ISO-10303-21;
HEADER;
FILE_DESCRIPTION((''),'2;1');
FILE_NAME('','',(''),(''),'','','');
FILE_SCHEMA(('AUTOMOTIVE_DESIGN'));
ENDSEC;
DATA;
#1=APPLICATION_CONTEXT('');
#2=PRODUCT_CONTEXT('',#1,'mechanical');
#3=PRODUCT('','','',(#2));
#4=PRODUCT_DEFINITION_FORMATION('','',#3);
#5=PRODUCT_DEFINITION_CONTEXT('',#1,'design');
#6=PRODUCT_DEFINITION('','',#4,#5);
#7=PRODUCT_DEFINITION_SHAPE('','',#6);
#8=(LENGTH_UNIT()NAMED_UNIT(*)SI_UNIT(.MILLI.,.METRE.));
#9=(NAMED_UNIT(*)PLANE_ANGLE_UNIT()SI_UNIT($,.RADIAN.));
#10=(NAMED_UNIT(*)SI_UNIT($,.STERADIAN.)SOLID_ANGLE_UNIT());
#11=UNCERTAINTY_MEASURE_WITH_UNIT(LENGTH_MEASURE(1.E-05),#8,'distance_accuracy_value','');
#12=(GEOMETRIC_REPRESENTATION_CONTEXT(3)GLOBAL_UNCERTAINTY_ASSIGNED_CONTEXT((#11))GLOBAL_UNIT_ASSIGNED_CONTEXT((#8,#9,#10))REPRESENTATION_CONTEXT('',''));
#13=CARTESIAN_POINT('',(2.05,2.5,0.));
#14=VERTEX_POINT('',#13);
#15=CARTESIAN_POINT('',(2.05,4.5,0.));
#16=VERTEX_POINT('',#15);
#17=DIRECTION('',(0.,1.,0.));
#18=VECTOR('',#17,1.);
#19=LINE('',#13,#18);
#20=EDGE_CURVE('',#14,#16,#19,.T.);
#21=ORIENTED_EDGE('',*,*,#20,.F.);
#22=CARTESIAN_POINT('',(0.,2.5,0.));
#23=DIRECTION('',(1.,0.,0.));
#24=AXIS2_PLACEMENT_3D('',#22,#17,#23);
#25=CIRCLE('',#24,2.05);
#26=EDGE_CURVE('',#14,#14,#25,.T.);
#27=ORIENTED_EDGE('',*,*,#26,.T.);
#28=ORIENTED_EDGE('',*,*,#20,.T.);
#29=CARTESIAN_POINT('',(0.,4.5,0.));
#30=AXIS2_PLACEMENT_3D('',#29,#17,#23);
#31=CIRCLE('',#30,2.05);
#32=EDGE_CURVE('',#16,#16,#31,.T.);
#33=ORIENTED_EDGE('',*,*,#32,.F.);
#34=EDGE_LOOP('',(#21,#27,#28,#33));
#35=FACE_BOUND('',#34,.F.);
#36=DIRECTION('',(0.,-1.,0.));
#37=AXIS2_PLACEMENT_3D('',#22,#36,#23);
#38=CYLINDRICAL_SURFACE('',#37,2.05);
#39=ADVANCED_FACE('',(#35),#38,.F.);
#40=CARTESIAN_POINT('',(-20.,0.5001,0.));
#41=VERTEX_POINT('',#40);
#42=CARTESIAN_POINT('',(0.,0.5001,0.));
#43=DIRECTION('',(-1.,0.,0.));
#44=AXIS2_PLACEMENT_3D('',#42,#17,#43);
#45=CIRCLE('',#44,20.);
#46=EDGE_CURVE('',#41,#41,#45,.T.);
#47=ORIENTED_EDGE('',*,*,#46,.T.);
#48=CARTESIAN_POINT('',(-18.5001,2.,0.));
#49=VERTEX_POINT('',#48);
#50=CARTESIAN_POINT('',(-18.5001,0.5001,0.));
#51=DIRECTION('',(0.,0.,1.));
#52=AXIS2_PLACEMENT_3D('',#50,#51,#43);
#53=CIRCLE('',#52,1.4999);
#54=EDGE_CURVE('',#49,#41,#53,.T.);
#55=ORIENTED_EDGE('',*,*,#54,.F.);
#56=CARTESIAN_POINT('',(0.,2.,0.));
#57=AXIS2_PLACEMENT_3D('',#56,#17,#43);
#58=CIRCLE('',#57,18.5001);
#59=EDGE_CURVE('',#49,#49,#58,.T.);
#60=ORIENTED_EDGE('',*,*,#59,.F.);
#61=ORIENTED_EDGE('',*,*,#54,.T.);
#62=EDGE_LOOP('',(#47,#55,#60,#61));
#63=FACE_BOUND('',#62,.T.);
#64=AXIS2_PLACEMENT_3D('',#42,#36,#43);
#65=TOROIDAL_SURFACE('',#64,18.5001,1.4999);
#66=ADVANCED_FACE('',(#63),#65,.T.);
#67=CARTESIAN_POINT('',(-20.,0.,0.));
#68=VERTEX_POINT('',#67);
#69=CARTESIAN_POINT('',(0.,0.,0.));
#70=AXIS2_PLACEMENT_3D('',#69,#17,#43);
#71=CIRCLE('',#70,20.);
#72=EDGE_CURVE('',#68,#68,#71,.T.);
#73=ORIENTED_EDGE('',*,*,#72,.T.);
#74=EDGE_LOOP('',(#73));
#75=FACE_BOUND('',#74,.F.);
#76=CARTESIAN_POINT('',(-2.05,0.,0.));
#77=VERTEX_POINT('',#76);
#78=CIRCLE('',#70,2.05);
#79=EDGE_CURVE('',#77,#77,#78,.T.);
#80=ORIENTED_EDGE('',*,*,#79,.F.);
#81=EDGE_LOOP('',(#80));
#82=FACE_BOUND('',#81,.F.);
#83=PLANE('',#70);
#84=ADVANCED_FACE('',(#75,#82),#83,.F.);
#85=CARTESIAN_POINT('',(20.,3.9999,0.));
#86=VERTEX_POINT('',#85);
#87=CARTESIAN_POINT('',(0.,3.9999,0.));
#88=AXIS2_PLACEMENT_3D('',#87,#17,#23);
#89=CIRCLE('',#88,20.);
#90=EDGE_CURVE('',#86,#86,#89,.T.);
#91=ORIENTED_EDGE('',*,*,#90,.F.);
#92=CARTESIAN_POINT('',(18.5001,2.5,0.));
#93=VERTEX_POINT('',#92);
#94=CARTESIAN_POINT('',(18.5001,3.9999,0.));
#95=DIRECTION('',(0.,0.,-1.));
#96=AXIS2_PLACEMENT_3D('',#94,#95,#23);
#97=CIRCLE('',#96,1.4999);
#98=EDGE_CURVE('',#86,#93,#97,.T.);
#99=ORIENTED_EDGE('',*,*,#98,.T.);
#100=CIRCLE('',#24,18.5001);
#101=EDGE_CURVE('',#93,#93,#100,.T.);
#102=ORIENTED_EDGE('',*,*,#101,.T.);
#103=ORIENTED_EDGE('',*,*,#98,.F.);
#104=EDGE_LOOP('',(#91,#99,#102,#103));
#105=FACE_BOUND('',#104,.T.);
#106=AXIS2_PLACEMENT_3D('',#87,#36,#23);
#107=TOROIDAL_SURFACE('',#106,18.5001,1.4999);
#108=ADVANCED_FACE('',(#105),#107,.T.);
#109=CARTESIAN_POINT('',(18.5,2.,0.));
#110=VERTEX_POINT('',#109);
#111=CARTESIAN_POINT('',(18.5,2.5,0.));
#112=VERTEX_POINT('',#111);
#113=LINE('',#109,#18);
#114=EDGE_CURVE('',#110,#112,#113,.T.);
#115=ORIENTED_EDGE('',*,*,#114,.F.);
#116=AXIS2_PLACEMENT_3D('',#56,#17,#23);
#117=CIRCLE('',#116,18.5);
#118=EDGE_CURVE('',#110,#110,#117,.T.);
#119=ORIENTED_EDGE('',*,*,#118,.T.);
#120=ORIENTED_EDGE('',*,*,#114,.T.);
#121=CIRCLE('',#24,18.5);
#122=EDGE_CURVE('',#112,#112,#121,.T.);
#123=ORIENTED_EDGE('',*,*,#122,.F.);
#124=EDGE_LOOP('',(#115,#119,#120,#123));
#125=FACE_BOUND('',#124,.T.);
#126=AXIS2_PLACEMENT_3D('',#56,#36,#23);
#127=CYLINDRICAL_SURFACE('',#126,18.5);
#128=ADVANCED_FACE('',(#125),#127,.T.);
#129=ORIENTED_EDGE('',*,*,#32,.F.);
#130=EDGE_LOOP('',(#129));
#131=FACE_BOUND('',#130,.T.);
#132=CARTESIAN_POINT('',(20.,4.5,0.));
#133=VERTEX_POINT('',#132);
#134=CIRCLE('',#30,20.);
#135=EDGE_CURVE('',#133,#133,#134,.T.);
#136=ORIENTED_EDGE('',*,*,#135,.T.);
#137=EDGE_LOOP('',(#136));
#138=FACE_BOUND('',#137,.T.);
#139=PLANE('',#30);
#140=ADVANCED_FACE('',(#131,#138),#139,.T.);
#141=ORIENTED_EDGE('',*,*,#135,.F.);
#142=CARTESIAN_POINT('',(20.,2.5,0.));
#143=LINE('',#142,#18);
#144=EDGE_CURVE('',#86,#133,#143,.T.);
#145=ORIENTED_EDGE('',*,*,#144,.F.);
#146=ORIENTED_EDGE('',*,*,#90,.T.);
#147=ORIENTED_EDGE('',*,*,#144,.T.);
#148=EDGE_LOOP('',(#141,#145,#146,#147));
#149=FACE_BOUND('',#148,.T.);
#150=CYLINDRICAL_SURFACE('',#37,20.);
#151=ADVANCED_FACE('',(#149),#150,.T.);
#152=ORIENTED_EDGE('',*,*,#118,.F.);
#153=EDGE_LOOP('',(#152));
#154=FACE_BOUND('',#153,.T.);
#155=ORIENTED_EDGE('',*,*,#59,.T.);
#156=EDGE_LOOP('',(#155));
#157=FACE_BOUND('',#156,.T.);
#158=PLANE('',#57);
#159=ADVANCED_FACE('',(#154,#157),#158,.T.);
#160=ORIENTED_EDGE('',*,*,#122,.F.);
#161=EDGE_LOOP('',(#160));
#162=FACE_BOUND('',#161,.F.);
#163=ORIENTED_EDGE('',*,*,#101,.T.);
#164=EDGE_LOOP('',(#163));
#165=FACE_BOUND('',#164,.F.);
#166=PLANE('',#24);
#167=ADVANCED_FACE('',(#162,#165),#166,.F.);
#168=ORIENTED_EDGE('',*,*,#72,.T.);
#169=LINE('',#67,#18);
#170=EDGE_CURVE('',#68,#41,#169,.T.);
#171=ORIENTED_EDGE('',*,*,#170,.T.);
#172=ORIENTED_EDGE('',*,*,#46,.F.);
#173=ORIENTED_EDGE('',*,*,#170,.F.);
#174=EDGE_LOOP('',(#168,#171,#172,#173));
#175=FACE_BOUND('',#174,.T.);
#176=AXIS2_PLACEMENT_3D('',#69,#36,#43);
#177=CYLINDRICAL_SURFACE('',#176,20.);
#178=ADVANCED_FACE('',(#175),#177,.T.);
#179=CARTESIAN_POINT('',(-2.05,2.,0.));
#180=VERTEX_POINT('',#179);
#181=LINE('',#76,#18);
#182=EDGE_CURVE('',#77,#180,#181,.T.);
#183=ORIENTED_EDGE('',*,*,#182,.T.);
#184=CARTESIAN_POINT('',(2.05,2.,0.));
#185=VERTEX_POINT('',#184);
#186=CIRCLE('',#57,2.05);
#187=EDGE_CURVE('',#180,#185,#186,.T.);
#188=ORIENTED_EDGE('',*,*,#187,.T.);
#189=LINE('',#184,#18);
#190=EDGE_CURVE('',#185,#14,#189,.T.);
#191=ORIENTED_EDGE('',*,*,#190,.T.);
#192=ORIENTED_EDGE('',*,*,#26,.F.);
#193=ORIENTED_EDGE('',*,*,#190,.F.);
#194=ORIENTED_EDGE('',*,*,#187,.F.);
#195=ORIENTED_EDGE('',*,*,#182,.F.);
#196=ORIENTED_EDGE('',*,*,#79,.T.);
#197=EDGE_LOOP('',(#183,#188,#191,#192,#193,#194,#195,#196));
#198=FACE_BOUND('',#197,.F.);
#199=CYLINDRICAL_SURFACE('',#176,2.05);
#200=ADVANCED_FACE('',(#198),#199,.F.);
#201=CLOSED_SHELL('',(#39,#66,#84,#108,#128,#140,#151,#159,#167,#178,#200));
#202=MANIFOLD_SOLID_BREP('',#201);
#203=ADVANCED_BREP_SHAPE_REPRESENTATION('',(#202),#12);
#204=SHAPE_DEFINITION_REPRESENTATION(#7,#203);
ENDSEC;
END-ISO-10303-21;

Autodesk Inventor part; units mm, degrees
ref_plane "YZ Plane" through (0, 0, 0) normal (1, 0, 0) x (0, 1, 0)
ref_plane "XZ Plane" through (0, 0, 0) normal (0, 1, 0) x (-1, 0, 0)
ref_plane "XY Plane" through (0, 0, 0) normal (0, 0, 1) x (1, 0, 0)
sketch "Sketch1" plane through (0, 0, 0) normal (0, 1, 0) x (-1, 0, 0)
  circle A0 centre (0, 0) radius 20
  circle A1 centre (0, 0) radius 2.05
  dimension "d0" = 40
  dimension "d1" = 4.1
extrude "Extrusion1" add sketch "Sketch1" along normal blind 2
sketch "Sketch2" plane through (0, 2, 0) normal (0, 1, 0) x (1, 0, 0)
  circle A0 centre (0, 0) radius 18.5
  circle A1 centre (0, 0) radius 2.0967
  circle A2 centre (0, 0) radius 2.05
  dimension "d4" = 37
extrude "Extrusion2" add sketch "Sketch2" along normal blind 0.5 contours A0 | A1
sketch "Sketch3" plane through (0, 2.5, 0) normal (0, 1, 0) x (1, 0, 0)
  circle A0 centre (0, 0) radius 2.05
  circle A1 centre (0, 0) radius 20
extrude "Extrusion3" add sketch "Sketch3" along normal blind 2
fillet "Fillet1" radius 1.5 2 edges at (20, 2, 0) (-20, 2.5, 0)
properties part number "Raket_Hjul"
